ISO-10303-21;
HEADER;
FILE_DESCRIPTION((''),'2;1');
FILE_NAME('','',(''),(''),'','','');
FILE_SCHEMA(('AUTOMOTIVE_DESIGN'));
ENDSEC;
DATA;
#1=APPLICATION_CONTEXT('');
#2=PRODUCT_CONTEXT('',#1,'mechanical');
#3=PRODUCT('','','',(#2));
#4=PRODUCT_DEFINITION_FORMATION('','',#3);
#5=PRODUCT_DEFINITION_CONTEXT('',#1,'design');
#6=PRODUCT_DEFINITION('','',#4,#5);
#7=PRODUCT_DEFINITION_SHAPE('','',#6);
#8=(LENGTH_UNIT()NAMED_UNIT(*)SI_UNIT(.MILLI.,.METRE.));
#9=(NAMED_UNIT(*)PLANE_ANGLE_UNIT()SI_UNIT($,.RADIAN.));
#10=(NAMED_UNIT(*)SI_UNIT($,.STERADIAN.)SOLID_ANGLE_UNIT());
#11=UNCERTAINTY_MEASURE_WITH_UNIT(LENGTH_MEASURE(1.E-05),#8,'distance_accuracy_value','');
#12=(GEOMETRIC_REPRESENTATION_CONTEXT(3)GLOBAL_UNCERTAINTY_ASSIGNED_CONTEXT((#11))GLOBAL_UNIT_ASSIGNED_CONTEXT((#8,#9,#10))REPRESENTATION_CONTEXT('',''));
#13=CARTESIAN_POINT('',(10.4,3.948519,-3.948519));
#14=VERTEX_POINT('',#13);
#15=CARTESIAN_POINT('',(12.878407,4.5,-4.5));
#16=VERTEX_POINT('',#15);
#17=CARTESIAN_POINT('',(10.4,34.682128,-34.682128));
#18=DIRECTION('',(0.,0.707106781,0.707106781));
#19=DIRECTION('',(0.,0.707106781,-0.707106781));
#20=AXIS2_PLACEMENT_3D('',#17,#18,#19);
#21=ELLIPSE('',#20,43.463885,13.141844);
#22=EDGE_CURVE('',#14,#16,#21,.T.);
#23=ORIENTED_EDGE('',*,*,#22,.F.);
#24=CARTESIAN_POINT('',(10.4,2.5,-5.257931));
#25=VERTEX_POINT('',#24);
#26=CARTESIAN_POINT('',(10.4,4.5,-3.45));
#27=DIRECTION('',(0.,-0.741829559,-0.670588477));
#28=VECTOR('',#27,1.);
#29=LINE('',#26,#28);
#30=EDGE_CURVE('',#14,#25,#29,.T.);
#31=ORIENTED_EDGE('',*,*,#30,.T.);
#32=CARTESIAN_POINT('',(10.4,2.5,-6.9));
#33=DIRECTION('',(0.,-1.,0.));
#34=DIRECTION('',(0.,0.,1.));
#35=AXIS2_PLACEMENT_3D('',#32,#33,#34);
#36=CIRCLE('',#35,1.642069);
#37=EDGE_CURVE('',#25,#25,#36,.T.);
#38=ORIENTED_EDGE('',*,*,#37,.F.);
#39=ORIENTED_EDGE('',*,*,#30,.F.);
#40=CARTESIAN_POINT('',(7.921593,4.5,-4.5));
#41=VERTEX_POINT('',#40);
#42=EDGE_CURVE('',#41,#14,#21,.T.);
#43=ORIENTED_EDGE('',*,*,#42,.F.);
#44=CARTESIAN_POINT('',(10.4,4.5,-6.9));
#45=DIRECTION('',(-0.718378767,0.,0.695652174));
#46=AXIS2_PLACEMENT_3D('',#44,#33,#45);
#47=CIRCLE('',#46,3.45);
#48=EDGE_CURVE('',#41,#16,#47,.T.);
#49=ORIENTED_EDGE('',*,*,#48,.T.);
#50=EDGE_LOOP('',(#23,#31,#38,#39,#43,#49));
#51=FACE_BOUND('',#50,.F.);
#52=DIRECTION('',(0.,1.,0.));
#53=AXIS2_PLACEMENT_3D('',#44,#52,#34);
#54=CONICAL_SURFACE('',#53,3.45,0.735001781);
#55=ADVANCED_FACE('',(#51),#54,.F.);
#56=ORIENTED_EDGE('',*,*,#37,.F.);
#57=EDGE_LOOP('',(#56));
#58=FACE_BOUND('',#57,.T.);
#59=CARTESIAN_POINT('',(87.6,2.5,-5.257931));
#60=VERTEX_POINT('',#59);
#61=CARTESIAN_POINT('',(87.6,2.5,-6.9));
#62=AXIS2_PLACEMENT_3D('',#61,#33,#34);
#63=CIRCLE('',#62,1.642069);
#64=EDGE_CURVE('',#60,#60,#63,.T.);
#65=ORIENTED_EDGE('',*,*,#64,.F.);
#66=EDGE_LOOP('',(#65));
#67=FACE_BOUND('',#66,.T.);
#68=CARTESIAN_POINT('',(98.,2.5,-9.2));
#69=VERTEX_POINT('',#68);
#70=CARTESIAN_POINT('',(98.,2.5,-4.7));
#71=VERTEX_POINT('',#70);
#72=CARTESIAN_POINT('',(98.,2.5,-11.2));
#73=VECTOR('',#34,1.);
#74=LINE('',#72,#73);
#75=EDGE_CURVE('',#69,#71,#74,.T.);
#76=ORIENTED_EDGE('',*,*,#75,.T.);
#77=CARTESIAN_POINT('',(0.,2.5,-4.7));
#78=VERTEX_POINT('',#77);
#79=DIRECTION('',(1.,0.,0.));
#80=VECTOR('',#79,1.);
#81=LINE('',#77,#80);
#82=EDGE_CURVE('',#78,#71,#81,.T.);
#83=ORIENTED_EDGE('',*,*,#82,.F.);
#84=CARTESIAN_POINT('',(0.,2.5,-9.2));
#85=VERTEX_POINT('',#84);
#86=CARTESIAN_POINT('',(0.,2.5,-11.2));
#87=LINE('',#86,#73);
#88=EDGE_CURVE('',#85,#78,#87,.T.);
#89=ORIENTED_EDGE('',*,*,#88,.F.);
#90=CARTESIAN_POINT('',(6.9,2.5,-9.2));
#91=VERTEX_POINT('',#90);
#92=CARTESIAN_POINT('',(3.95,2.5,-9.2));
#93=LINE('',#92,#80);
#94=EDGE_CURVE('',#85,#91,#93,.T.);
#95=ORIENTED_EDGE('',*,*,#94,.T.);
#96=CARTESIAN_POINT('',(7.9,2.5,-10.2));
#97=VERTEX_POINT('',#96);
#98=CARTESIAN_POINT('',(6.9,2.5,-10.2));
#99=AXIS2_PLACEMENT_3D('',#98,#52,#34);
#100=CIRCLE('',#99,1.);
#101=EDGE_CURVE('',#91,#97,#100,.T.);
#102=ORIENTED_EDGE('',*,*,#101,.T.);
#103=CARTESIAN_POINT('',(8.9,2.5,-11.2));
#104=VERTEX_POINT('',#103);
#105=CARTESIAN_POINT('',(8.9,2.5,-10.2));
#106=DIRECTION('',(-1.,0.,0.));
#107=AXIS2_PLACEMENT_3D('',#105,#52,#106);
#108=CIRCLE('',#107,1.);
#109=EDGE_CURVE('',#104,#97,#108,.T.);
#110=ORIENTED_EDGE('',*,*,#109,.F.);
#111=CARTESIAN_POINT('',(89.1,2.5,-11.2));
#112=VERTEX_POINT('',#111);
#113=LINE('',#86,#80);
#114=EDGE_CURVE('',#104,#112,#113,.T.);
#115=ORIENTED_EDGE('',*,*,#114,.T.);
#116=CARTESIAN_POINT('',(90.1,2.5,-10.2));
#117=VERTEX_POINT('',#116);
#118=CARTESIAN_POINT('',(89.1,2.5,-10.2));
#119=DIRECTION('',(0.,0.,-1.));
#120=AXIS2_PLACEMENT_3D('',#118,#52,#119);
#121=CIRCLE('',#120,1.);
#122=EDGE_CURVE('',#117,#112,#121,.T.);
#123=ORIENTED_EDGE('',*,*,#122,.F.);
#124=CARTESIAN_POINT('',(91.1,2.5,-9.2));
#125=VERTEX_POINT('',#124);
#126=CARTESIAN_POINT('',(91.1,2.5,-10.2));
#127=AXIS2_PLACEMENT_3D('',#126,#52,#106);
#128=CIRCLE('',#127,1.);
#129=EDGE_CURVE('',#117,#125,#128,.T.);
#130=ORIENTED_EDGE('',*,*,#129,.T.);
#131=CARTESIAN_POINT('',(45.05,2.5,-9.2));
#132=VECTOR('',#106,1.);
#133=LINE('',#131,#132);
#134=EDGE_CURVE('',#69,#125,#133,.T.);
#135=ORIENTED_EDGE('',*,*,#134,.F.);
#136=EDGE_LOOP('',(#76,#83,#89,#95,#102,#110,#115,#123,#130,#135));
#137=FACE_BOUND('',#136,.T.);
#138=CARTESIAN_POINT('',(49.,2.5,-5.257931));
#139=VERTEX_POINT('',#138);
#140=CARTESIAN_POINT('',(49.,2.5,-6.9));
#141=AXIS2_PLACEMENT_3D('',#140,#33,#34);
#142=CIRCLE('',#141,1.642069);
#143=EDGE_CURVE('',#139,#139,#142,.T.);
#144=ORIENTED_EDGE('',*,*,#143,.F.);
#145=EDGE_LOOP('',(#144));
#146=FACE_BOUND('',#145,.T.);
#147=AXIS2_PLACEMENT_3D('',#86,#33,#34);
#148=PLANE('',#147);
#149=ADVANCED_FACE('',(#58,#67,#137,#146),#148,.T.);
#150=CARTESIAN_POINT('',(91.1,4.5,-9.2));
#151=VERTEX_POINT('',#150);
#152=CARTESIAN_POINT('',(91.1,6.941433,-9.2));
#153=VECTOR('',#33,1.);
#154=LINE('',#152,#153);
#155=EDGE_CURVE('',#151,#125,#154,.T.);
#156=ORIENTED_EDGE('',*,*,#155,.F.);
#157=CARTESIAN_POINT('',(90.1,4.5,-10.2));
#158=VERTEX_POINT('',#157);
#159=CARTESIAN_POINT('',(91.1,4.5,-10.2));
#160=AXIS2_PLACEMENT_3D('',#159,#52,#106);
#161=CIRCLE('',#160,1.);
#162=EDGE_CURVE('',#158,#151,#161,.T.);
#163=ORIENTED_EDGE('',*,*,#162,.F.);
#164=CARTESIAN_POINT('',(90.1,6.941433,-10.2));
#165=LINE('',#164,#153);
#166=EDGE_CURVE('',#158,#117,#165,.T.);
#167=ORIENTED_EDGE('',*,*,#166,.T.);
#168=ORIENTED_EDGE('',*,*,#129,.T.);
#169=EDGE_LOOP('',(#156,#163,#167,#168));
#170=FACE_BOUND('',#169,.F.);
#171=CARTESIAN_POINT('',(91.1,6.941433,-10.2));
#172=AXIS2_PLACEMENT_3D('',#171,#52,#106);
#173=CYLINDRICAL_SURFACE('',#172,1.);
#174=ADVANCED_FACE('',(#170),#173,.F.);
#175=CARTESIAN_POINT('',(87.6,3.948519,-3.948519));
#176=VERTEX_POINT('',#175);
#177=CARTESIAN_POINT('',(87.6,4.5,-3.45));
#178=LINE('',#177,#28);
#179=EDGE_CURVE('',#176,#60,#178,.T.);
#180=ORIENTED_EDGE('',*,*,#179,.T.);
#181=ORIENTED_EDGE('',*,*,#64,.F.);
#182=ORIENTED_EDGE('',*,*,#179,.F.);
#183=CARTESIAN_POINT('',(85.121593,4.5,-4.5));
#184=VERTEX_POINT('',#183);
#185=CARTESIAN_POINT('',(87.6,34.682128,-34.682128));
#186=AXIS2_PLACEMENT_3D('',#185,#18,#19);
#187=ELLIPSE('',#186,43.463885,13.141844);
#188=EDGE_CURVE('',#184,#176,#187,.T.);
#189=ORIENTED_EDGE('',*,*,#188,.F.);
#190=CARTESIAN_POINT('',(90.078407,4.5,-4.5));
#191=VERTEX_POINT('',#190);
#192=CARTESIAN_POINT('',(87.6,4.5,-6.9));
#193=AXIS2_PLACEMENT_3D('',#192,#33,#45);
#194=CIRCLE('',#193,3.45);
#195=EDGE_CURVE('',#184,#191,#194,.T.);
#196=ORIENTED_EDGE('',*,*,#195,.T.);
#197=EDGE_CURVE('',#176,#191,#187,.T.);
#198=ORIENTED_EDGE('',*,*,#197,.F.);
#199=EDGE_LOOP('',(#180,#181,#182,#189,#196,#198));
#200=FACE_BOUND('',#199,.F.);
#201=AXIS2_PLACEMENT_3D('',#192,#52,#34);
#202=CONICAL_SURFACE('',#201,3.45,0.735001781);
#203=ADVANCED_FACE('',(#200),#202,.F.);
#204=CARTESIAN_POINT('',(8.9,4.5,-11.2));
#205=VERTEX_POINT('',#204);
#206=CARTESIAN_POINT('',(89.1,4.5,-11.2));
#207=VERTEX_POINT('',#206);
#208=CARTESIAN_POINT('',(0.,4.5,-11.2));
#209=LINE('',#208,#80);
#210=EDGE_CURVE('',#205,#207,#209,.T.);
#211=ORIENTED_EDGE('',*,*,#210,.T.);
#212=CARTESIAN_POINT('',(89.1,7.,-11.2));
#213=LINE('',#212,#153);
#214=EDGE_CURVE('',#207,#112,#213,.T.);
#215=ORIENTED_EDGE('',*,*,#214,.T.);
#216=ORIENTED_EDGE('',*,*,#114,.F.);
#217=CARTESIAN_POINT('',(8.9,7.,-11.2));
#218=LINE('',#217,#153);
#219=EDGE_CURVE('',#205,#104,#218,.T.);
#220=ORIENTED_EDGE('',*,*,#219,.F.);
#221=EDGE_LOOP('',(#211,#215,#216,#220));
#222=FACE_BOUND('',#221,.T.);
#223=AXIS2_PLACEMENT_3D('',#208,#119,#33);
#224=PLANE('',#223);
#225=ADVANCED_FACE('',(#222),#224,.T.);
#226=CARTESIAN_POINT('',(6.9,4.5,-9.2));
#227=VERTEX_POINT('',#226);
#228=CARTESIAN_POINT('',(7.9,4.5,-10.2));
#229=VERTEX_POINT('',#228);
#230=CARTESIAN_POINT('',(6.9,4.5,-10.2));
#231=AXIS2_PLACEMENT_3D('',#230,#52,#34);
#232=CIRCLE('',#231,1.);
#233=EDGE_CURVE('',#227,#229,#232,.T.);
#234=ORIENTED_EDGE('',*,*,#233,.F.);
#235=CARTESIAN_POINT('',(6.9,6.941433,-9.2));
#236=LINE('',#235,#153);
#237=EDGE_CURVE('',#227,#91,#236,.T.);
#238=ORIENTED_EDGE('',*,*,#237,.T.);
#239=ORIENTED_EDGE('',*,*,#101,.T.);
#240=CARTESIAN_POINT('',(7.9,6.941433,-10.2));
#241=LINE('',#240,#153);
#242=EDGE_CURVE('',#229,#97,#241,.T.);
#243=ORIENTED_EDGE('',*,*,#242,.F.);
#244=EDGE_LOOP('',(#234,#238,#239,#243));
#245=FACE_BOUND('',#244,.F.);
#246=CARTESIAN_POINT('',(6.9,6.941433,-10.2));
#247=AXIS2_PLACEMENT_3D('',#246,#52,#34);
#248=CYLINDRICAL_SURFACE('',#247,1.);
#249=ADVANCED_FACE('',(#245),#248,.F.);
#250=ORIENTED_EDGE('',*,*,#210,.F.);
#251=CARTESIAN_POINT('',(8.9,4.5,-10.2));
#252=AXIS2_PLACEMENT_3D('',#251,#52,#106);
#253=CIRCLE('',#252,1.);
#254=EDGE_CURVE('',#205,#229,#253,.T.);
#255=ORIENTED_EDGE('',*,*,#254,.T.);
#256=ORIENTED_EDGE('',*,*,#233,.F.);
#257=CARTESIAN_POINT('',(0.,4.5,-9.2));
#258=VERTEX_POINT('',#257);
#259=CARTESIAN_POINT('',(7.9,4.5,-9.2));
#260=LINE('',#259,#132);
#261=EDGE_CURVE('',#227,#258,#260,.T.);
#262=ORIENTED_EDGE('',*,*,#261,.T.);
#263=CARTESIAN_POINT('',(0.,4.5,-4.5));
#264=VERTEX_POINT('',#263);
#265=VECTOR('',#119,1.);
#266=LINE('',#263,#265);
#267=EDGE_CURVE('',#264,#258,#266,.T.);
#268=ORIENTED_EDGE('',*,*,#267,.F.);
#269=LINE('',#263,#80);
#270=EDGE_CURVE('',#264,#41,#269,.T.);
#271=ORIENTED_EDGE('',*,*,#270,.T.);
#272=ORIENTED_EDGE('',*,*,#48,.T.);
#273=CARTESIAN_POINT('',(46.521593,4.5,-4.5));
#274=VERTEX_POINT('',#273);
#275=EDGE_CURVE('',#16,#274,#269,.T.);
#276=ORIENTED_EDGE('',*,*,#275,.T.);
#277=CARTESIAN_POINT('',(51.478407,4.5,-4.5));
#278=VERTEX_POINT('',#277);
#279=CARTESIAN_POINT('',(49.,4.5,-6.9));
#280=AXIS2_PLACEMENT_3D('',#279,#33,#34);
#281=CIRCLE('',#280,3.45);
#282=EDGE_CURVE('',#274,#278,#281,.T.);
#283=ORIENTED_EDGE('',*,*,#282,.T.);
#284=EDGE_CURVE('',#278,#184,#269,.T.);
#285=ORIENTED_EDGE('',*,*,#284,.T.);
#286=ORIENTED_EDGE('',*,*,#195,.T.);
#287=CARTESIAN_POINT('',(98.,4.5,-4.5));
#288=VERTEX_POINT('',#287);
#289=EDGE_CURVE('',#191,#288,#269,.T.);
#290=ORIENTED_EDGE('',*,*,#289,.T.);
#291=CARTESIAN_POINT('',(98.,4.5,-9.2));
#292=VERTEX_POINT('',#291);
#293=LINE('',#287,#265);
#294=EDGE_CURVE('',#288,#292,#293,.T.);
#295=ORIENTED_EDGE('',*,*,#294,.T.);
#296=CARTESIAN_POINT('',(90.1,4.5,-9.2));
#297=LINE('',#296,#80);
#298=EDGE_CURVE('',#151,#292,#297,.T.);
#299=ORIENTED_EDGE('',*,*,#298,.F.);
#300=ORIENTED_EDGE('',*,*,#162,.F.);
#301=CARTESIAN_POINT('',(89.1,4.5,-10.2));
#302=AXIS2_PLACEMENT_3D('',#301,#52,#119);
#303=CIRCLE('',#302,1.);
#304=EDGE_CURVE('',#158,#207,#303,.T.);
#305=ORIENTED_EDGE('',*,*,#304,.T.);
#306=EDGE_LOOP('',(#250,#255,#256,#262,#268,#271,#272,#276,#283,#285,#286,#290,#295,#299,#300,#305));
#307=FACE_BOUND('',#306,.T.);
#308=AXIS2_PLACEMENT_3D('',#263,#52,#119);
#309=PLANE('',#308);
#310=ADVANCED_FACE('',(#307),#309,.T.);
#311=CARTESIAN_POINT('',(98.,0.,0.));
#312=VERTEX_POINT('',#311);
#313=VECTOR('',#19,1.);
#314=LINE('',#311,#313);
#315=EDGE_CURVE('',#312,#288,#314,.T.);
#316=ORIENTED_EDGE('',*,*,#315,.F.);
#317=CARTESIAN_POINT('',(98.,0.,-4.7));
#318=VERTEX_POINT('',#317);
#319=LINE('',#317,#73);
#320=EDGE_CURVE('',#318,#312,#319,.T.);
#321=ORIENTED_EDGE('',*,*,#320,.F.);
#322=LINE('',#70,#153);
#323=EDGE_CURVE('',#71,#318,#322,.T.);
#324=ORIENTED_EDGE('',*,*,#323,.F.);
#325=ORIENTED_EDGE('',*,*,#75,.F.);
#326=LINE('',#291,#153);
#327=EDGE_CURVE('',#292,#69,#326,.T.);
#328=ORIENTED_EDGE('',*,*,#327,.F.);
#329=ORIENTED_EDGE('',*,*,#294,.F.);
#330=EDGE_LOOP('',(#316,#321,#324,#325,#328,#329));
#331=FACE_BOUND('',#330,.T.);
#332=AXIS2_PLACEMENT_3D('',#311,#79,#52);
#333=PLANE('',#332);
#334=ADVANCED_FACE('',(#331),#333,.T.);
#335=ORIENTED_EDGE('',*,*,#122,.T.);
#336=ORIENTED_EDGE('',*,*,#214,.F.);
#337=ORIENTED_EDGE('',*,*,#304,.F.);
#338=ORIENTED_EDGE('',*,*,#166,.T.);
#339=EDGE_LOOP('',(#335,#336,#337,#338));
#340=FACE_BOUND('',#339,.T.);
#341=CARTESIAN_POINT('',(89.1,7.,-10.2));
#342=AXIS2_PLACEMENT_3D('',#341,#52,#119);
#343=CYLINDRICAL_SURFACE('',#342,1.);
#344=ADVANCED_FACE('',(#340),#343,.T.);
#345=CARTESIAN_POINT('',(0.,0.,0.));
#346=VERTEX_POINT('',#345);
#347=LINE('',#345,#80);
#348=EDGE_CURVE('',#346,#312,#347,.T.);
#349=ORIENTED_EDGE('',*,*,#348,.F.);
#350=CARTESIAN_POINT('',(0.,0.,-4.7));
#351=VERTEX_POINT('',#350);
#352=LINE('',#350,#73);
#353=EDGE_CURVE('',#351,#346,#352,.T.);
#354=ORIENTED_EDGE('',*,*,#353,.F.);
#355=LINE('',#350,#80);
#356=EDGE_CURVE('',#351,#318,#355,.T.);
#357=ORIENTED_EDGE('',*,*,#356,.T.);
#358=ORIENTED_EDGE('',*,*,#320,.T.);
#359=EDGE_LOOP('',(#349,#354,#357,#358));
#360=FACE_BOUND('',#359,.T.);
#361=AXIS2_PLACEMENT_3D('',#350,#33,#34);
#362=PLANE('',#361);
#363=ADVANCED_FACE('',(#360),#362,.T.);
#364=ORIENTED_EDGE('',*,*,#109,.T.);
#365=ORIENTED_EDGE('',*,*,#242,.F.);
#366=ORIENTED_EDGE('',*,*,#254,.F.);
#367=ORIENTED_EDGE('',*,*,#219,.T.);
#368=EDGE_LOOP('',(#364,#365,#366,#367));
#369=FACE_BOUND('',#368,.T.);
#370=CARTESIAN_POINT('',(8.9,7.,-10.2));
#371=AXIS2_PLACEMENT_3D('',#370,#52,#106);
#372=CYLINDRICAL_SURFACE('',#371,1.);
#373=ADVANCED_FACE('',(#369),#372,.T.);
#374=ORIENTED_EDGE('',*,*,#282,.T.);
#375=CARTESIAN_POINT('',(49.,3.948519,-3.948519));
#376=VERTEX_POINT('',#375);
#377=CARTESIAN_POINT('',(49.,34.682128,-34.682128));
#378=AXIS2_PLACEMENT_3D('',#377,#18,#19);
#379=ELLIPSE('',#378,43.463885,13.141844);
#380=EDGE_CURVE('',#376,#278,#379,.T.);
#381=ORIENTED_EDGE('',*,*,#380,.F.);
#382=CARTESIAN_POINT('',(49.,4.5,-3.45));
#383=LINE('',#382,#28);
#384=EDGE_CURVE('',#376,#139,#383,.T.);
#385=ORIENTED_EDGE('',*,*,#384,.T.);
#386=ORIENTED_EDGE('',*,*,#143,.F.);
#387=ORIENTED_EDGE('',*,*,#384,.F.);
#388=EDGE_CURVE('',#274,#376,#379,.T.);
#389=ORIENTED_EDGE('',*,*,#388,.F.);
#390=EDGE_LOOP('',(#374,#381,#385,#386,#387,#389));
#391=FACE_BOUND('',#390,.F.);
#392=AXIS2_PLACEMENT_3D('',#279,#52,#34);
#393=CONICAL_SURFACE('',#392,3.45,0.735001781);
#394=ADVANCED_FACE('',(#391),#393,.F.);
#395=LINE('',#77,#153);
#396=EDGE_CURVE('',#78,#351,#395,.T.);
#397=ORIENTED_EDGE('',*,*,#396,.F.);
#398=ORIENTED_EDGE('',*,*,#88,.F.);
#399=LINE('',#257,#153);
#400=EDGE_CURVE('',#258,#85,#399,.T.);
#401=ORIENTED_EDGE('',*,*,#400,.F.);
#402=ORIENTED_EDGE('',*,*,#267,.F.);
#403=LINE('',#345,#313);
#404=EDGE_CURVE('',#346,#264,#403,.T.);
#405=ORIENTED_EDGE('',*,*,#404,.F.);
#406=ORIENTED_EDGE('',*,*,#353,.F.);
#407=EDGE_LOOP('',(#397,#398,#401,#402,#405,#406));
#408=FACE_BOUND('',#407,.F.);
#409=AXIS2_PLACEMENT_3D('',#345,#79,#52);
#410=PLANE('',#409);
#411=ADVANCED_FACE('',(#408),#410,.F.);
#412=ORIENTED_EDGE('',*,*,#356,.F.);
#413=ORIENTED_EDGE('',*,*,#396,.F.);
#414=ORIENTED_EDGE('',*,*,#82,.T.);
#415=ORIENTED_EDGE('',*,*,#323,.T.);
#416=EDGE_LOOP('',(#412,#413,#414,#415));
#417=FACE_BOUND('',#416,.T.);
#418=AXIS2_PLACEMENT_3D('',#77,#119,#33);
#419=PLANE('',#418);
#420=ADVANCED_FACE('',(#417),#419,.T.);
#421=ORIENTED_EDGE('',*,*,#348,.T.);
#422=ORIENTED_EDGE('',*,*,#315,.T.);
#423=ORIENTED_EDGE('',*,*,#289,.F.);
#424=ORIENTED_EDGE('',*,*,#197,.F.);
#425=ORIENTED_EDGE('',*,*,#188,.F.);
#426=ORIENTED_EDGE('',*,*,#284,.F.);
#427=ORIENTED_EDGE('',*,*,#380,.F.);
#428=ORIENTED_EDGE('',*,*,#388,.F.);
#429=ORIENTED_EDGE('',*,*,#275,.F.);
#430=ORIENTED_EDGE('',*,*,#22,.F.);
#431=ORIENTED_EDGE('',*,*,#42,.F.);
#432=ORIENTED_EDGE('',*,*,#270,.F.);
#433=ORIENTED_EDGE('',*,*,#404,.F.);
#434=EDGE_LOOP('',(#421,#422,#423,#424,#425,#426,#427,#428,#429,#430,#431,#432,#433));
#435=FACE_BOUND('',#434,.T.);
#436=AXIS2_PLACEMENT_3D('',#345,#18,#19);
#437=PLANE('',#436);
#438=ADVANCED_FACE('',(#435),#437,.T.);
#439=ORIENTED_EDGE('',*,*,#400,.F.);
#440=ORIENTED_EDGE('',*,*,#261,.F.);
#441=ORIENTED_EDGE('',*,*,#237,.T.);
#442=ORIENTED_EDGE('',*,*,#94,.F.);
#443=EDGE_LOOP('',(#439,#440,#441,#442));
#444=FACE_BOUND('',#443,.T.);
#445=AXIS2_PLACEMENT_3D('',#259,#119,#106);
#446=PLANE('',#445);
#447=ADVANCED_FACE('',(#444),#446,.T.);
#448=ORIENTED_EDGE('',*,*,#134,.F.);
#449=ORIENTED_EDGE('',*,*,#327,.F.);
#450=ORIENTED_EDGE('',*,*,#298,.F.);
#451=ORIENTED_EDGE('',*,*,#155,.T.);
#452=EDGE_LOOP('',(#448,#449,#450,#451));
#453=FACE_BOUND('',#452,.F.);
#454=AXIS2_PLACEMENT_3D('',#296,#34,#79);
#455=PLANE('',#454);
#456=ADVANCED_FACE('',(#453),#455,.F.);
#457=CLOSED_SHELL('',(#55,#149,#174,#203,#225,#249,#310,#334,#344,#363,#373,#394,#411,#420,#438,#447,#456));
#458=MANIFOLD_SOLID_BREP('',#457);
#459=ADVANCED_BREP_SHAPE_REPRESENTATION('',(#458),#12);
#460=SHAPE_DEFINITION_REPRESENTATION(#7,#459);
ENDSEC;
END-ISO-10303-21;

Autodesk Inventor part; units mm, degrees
ref_plane "YZ Plane" through (0, 0, 0) normal (1, 0, 0) x (0, 1, 0)
ref_plane "XZ Plane" through (0, 0, 0) normal (0, 1, 0) x (-1, 0, 0)
ref_plane "XY Plane" through (0, 0, 0) normal (0, 0, 1) x (1, 0, 0)
sketch "Szkic1" plane through (0, 0, 0) normal (1, 0, 0) x (0, 1, 0)
  line L0 (0, 0) -> (4.5, -4.5)
  line L1 (4.5, -4.5) -> (4.5, -11.2)
  line L2 (4.5, -11.2) -> (2.5, -11.2)
  line L3 (2.5, -11.2) -> (2.5, -4.7)
  line L4 (2.5, -4.7) -> (0, -4.7)
  line L5 (0, -4.7) -> (0, 0)
  line L6 (2.5, -4.7) -> (2.5, -2.5) construction
  dimension "d0" = 11.2
  dimension "d1" = 4.5
  dimension "d2" = 45
  dimension "d3" = 2.5
  dimension "d4" = 6.5
extrude "Wyciągnięcie proste1" add sketch "Szkic1" along normal blind 98
sketch "Szkic2" plane through (0, 4.5, -4.5) normal (0, 1, 0) x (1, 0, 0)
  line L0 (0, 6.7) -> (0, 0.2) projected
  line L1 (0, 6.7) -> (7.9, 6.7)
  line L2 (7.9, 6.7) -> (7.9, 4.7)
  line L3 (7.9, 4.7) -> (0, 4.7)
  line L4 (0, 4.7) -> (0, 6.7)
  line L5 (0, 0.2) -> (98, 0.2) construction
  line L6 (49, 0.2) -> (49, 6.7) construction
  line L7 (0, 6.7) -> (98, 6.7) construction
  line L8 (98, 6.7) -> (90.1, 6.7)
  line L9 (90.1, 6.7) -> (90.1, 4.7)
  line L10 (90.1, 4.7) -> (98, 4.7)
  line L11 (98, 4.7) -> (98, 6.7)
  point P0 (0, -4.5)
  dimension "d7" = 7.9
  dimension "d8" = 2
extrude "Wyciągnięcie proste2" cut sketch "Szkic2" against normal through all
sketch "Szkic3" plane through (0, 4.5, -4.5) normal (0, 1, 0) x (1, 0, 0)
  line L0 (0, -4.5) -> (98, -4.5) construction
  line L1 (49, -4.5) -> (49, 6.7) construction
  line L2 (7.9, 6.7) -> (90.1, 6.7) construction
  line L3 (98, 4.7) -> (98, 0) construction
  point P0 (87.6, 2.4)
  point P1 (49, 2.4)
  point P2 (10.4, 2.4)
  point P3 (98, 0.2)
  dimension "d11" = 10.4
  dimension "d21" = 2.2
hole "Otwór1" at (87.6, 4.5, -6.9) at (49, 4.5, -6.9) at (10.4, 4.5, -6.9) direction (0, -1, 0) diameter 3.2 end through all countersink diameter 6.9 countersink angle 84.225 clearance for "Śruba ze łbem stożkowym ISO 2009/7046" size "M3" standard "ISO"
fillet "Zaokrąglenie1" radius 1 4 edges at (90.1, 3.4707, -9.2) (90.1, 3.5, -11.2) (7.9, 3.4707, -9.2) (7.9, 3.5, -11.2)
properties part number "Plog2" material "Stal"
